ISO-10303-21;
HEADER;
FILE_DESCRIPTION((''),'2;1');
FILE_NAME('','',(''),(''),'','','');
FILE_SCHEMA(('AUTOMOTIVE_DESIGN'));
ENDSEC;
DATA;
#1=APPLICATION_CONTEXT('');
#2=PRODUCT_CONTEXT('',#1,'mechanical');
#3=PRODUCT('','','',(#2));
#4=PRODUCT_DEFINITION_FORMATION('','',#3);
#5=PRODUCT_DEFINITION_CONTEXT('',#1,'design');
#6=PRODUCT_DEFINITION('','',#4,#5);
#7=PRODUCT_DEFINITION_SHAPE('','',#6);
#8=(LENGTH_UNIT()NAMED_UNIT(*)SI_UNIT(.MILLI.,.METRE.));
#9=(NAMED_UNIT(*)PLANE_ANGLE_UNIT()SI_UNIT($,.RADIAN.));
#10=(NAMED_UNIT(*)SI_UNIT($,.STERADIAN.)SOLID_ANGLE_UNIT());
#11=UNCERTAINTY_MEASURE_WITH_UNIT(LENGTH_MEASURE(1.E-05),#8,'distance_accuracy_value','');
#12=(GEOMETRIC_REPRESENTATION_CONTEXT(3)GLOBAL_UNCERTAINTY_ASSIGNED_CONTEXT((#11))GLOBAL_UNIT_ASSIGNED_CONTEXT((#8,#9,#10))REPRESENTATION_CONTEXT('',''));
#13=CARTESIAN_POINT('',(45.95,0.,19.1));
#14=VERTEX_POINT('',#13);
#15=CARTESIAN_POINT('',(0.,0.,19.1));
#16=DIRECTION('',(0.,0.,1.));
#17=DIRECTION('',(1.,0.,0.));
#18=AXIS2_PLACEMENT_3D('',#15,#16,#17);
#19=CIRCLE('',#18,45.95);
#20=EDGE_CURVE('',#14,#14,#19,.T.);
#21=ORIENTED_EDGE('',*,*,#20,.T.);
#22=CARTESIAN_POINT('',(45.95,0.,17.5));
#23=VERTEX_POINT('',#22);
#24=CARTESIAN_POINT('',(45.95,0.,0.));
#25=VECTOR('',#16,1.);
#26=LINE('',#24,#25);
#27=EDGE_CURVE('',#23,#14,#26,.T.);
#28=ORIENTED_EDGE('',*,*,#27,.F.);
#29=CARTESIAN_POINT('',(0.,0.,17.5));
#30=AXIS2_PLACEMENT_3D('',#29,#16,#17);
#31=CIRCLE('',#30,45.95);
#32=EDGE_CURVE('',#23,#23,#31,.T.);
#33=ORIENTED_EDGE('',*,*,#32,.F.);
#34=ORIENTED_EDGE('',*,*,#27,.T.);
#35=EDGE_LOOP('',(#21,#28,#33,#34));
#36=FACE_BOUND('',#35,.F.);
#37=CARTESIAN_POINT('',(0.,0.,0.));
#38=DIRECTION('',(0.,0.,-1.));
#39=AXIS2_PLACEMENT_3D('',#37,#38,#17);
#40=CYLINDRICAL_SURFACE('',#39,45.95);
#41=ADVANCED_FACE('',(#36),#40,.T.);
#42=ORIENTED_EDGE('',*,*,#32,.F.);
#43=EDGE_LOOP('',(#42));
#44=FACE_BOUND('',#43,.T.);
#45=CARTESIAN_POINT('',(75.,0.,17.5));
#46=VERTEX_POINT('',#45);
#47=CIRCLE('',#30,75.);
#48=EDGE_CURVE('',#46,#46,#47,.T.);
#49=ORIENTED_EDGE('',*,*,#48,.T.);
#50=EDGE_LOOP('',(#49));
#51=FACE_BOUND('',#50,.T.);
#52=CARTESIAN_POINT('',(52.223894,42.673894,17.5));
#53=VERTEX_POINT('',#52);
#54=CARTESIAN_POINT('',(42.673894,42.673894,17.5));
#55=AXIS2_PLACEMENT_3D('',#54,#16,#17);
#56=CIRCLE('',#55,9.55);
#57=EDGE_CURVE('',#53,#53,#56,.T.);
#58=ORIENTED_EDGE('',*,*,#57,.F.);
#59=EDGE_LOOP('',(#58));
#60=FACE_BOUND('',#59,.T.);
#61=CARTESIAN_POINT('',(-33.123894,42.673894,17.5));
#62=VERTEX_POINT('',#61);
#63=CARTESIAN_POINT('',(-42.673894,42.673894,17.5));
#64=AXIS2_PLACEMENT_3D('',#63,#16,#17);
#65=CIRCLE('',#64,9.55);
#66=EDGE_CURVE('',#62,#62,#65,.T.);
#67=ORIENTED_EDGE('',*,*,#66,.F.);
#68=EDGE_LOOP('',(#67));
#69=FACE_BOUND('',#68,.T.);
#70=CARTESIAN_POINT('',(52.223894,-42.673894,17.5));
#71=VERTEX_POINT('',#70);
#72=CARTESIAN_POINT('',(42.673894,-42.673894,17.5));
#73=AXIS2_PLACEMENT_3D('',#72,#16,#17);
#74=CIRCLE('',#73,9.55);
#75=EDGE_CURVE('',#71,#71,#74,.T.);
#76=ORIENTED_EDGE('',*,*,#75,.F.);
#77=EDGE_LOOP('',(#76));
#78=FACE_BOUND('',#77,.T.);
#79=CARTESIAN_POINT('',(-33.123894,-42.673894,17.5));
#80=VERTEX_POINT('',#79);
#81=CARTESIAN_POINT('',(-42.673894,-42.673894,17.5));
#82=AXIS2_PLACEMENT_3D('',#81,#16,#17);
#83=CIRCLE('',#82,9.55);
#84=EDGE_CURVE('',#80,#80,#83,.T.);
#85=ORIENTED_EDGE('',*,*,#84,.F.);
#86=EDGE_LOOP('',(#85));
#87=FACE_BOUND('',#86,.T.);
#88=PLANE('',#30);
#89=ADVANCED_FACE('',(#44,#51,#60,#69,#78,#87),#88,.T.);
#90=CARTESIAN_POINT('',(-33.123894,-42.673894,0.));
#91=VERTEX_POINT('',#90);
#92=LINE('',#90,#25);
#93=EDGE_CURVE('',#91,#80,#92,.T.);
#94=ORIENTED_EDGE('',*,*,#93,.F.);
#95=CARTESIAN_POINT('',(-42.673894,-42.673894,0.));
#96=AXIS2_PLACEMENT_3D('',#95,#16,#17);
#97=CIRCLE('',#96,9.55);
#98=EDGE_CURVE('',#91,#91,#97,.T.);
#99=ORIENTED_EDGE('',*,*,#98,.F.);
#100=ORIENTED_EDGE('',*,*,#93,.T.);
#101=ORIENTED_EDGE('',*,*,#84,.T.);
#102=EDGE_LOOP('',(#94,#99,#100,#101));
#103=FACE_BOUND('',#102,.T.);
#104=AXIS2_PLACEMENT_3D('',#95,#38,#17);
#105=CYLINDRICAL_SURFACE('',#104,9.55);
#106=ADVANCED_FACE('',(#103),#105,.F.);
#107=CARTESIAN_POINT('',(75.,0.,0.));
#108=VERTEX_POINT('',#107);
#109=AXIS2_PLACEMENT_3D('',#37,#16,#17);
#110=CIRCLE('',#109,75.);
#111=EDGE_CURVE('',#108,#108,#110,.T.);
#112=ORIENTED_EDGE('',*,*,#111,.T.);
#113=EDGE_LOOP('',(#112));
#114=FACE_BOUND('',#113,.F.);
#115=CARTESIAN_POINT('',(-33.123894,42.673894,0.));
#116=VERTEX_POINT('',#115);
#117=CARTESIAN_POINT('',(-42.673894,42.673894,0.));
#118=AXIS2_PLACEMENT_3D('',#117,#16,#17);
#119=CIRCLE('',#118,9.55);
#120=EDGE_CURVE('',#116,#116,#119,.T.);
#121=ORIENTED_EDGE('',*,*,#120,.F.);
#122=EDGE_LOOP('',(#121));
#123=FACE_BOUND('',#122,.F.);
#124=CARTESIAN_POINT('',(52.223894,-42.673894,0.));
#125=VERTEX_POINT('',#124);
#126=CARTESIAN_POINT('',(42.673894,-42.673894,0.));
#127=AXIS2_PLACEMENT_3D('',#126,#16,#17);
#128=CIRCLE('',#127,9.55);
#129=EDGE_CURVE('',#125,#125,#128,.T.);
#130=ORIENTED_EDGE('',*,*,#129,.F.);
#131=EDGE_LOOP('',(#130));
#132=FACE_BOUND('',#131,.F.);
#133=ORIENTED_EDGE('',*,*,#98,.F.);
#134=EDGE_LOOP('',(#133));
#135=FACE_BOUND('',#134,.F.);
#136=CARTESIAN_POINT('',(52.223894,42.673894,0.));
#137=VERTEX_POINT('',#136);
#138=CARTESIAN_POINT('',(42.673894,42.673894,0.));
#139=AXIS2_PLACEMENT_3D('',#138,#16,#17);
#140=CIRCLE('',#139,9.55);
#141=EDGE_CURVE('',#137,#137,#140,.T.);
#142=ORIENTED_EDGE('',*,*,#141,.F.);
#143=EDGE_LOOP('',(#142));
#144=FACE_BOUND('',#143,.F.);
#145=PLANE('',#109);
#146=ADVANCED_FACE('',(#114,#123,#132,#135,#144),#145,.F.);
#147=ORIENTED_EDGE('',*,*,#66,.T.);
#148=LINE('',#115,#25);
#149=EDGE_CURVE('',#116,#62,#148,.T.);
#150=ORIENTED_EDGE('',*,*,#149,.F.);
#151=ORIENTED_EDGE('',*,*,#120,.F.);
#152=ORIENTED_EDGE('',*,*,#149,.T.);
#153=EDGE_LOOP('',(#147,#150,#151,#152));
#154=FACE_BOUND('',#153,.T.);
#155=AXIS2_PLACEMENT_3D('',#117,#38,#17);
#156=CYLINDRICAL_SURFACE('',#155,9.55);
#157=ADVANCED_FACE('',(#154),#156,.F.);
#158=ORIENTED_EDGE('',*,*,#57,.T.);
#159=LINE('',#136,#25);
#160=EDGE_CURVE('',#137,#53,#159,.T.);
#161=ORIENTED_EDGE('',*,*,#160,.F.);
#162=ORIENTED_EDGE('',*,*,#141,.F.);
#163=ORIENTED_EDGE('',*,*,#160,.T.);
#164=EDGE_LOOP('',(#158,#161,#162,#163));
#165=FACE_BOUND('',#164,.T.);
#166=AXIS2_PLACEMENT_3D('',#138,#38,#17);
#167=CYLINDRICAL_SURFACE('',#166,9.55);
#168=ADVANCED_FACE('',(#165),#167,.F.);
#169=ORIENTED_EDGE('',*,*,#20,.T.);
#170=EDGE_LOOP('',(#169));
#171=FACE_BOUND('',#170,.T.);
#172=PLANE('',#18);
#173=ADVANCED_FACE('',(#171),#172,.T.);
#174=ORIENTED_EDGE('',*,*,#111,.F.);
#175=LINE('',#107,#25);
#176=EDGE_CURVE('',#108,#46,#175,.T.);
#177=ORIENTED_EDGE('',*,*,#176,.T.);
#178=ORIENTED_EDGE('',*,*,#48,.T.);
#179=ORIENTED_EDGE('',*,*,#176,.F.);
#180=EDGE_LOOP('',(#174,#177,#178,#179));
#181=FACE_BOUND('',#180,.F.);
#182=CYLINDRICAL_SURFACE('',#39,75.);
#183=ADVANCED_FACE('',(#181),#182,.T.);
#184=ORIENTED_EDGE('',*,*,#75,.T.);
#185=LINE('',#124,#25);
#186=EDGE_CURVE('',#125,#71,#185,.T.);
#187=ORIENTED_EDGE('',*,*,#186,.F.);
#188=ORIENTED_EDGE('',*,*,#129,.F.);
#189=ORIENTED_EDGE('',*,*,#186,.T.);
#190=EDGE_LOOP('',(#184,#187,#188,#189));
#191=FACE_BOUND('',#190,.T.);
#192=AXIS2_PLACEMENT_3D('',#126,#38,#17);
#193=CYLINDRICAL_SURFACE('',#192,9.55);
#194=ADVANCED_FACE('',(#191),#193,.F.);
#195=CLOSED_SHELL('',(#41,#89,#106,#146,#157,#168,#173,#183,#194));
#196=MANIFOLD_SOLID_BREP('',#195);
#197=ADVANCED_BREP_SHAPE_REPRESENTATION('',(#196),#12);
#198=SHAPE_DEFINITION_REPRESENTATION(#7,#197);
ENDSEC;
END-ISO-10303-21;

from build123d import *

# Parameters (mm, degrees)
F2_R     = 75
F2_R_2   = 9.55
F2_R_3   = 45.95
F4_DEPTH = 17.5
F5_DEPTH = 19.1


with BuildPart() as f4:
    # F2 (on Top) → F4 (new body)
    with BuildSketch(Plane.XY):
        Circle(F2_R)
        with Locations((-42.6738942446, -42.6738942446)):
            Circle(F2_R_2, mode=Mode.SUBTRACT)
        with Locations((42.6738942446, -42.6738942446)):
            Circle(F2_R_2, mode=Mode.SUBTRACT)
        with Locations((-42.6738942446, 42.6738942446)):
            Circle(F2_R_2, mode=Mode.SUBTRACT)
        Circle(F2_R_3, mode=Mode.SUBTRACT)
        with Locations((42.6738942446, 42.6738942446)):
            Circle(F2_R_2, mode=Mode.SUBTRACT)
    extrude(amount=F4_DEPTH)

    # F2 (on Top) → F5 (join)
    with BuildSketch(Plane.XY):
        Circle(F2_R_3)
    extrude(amount=F5_DEPTH)


solid = f4.part
